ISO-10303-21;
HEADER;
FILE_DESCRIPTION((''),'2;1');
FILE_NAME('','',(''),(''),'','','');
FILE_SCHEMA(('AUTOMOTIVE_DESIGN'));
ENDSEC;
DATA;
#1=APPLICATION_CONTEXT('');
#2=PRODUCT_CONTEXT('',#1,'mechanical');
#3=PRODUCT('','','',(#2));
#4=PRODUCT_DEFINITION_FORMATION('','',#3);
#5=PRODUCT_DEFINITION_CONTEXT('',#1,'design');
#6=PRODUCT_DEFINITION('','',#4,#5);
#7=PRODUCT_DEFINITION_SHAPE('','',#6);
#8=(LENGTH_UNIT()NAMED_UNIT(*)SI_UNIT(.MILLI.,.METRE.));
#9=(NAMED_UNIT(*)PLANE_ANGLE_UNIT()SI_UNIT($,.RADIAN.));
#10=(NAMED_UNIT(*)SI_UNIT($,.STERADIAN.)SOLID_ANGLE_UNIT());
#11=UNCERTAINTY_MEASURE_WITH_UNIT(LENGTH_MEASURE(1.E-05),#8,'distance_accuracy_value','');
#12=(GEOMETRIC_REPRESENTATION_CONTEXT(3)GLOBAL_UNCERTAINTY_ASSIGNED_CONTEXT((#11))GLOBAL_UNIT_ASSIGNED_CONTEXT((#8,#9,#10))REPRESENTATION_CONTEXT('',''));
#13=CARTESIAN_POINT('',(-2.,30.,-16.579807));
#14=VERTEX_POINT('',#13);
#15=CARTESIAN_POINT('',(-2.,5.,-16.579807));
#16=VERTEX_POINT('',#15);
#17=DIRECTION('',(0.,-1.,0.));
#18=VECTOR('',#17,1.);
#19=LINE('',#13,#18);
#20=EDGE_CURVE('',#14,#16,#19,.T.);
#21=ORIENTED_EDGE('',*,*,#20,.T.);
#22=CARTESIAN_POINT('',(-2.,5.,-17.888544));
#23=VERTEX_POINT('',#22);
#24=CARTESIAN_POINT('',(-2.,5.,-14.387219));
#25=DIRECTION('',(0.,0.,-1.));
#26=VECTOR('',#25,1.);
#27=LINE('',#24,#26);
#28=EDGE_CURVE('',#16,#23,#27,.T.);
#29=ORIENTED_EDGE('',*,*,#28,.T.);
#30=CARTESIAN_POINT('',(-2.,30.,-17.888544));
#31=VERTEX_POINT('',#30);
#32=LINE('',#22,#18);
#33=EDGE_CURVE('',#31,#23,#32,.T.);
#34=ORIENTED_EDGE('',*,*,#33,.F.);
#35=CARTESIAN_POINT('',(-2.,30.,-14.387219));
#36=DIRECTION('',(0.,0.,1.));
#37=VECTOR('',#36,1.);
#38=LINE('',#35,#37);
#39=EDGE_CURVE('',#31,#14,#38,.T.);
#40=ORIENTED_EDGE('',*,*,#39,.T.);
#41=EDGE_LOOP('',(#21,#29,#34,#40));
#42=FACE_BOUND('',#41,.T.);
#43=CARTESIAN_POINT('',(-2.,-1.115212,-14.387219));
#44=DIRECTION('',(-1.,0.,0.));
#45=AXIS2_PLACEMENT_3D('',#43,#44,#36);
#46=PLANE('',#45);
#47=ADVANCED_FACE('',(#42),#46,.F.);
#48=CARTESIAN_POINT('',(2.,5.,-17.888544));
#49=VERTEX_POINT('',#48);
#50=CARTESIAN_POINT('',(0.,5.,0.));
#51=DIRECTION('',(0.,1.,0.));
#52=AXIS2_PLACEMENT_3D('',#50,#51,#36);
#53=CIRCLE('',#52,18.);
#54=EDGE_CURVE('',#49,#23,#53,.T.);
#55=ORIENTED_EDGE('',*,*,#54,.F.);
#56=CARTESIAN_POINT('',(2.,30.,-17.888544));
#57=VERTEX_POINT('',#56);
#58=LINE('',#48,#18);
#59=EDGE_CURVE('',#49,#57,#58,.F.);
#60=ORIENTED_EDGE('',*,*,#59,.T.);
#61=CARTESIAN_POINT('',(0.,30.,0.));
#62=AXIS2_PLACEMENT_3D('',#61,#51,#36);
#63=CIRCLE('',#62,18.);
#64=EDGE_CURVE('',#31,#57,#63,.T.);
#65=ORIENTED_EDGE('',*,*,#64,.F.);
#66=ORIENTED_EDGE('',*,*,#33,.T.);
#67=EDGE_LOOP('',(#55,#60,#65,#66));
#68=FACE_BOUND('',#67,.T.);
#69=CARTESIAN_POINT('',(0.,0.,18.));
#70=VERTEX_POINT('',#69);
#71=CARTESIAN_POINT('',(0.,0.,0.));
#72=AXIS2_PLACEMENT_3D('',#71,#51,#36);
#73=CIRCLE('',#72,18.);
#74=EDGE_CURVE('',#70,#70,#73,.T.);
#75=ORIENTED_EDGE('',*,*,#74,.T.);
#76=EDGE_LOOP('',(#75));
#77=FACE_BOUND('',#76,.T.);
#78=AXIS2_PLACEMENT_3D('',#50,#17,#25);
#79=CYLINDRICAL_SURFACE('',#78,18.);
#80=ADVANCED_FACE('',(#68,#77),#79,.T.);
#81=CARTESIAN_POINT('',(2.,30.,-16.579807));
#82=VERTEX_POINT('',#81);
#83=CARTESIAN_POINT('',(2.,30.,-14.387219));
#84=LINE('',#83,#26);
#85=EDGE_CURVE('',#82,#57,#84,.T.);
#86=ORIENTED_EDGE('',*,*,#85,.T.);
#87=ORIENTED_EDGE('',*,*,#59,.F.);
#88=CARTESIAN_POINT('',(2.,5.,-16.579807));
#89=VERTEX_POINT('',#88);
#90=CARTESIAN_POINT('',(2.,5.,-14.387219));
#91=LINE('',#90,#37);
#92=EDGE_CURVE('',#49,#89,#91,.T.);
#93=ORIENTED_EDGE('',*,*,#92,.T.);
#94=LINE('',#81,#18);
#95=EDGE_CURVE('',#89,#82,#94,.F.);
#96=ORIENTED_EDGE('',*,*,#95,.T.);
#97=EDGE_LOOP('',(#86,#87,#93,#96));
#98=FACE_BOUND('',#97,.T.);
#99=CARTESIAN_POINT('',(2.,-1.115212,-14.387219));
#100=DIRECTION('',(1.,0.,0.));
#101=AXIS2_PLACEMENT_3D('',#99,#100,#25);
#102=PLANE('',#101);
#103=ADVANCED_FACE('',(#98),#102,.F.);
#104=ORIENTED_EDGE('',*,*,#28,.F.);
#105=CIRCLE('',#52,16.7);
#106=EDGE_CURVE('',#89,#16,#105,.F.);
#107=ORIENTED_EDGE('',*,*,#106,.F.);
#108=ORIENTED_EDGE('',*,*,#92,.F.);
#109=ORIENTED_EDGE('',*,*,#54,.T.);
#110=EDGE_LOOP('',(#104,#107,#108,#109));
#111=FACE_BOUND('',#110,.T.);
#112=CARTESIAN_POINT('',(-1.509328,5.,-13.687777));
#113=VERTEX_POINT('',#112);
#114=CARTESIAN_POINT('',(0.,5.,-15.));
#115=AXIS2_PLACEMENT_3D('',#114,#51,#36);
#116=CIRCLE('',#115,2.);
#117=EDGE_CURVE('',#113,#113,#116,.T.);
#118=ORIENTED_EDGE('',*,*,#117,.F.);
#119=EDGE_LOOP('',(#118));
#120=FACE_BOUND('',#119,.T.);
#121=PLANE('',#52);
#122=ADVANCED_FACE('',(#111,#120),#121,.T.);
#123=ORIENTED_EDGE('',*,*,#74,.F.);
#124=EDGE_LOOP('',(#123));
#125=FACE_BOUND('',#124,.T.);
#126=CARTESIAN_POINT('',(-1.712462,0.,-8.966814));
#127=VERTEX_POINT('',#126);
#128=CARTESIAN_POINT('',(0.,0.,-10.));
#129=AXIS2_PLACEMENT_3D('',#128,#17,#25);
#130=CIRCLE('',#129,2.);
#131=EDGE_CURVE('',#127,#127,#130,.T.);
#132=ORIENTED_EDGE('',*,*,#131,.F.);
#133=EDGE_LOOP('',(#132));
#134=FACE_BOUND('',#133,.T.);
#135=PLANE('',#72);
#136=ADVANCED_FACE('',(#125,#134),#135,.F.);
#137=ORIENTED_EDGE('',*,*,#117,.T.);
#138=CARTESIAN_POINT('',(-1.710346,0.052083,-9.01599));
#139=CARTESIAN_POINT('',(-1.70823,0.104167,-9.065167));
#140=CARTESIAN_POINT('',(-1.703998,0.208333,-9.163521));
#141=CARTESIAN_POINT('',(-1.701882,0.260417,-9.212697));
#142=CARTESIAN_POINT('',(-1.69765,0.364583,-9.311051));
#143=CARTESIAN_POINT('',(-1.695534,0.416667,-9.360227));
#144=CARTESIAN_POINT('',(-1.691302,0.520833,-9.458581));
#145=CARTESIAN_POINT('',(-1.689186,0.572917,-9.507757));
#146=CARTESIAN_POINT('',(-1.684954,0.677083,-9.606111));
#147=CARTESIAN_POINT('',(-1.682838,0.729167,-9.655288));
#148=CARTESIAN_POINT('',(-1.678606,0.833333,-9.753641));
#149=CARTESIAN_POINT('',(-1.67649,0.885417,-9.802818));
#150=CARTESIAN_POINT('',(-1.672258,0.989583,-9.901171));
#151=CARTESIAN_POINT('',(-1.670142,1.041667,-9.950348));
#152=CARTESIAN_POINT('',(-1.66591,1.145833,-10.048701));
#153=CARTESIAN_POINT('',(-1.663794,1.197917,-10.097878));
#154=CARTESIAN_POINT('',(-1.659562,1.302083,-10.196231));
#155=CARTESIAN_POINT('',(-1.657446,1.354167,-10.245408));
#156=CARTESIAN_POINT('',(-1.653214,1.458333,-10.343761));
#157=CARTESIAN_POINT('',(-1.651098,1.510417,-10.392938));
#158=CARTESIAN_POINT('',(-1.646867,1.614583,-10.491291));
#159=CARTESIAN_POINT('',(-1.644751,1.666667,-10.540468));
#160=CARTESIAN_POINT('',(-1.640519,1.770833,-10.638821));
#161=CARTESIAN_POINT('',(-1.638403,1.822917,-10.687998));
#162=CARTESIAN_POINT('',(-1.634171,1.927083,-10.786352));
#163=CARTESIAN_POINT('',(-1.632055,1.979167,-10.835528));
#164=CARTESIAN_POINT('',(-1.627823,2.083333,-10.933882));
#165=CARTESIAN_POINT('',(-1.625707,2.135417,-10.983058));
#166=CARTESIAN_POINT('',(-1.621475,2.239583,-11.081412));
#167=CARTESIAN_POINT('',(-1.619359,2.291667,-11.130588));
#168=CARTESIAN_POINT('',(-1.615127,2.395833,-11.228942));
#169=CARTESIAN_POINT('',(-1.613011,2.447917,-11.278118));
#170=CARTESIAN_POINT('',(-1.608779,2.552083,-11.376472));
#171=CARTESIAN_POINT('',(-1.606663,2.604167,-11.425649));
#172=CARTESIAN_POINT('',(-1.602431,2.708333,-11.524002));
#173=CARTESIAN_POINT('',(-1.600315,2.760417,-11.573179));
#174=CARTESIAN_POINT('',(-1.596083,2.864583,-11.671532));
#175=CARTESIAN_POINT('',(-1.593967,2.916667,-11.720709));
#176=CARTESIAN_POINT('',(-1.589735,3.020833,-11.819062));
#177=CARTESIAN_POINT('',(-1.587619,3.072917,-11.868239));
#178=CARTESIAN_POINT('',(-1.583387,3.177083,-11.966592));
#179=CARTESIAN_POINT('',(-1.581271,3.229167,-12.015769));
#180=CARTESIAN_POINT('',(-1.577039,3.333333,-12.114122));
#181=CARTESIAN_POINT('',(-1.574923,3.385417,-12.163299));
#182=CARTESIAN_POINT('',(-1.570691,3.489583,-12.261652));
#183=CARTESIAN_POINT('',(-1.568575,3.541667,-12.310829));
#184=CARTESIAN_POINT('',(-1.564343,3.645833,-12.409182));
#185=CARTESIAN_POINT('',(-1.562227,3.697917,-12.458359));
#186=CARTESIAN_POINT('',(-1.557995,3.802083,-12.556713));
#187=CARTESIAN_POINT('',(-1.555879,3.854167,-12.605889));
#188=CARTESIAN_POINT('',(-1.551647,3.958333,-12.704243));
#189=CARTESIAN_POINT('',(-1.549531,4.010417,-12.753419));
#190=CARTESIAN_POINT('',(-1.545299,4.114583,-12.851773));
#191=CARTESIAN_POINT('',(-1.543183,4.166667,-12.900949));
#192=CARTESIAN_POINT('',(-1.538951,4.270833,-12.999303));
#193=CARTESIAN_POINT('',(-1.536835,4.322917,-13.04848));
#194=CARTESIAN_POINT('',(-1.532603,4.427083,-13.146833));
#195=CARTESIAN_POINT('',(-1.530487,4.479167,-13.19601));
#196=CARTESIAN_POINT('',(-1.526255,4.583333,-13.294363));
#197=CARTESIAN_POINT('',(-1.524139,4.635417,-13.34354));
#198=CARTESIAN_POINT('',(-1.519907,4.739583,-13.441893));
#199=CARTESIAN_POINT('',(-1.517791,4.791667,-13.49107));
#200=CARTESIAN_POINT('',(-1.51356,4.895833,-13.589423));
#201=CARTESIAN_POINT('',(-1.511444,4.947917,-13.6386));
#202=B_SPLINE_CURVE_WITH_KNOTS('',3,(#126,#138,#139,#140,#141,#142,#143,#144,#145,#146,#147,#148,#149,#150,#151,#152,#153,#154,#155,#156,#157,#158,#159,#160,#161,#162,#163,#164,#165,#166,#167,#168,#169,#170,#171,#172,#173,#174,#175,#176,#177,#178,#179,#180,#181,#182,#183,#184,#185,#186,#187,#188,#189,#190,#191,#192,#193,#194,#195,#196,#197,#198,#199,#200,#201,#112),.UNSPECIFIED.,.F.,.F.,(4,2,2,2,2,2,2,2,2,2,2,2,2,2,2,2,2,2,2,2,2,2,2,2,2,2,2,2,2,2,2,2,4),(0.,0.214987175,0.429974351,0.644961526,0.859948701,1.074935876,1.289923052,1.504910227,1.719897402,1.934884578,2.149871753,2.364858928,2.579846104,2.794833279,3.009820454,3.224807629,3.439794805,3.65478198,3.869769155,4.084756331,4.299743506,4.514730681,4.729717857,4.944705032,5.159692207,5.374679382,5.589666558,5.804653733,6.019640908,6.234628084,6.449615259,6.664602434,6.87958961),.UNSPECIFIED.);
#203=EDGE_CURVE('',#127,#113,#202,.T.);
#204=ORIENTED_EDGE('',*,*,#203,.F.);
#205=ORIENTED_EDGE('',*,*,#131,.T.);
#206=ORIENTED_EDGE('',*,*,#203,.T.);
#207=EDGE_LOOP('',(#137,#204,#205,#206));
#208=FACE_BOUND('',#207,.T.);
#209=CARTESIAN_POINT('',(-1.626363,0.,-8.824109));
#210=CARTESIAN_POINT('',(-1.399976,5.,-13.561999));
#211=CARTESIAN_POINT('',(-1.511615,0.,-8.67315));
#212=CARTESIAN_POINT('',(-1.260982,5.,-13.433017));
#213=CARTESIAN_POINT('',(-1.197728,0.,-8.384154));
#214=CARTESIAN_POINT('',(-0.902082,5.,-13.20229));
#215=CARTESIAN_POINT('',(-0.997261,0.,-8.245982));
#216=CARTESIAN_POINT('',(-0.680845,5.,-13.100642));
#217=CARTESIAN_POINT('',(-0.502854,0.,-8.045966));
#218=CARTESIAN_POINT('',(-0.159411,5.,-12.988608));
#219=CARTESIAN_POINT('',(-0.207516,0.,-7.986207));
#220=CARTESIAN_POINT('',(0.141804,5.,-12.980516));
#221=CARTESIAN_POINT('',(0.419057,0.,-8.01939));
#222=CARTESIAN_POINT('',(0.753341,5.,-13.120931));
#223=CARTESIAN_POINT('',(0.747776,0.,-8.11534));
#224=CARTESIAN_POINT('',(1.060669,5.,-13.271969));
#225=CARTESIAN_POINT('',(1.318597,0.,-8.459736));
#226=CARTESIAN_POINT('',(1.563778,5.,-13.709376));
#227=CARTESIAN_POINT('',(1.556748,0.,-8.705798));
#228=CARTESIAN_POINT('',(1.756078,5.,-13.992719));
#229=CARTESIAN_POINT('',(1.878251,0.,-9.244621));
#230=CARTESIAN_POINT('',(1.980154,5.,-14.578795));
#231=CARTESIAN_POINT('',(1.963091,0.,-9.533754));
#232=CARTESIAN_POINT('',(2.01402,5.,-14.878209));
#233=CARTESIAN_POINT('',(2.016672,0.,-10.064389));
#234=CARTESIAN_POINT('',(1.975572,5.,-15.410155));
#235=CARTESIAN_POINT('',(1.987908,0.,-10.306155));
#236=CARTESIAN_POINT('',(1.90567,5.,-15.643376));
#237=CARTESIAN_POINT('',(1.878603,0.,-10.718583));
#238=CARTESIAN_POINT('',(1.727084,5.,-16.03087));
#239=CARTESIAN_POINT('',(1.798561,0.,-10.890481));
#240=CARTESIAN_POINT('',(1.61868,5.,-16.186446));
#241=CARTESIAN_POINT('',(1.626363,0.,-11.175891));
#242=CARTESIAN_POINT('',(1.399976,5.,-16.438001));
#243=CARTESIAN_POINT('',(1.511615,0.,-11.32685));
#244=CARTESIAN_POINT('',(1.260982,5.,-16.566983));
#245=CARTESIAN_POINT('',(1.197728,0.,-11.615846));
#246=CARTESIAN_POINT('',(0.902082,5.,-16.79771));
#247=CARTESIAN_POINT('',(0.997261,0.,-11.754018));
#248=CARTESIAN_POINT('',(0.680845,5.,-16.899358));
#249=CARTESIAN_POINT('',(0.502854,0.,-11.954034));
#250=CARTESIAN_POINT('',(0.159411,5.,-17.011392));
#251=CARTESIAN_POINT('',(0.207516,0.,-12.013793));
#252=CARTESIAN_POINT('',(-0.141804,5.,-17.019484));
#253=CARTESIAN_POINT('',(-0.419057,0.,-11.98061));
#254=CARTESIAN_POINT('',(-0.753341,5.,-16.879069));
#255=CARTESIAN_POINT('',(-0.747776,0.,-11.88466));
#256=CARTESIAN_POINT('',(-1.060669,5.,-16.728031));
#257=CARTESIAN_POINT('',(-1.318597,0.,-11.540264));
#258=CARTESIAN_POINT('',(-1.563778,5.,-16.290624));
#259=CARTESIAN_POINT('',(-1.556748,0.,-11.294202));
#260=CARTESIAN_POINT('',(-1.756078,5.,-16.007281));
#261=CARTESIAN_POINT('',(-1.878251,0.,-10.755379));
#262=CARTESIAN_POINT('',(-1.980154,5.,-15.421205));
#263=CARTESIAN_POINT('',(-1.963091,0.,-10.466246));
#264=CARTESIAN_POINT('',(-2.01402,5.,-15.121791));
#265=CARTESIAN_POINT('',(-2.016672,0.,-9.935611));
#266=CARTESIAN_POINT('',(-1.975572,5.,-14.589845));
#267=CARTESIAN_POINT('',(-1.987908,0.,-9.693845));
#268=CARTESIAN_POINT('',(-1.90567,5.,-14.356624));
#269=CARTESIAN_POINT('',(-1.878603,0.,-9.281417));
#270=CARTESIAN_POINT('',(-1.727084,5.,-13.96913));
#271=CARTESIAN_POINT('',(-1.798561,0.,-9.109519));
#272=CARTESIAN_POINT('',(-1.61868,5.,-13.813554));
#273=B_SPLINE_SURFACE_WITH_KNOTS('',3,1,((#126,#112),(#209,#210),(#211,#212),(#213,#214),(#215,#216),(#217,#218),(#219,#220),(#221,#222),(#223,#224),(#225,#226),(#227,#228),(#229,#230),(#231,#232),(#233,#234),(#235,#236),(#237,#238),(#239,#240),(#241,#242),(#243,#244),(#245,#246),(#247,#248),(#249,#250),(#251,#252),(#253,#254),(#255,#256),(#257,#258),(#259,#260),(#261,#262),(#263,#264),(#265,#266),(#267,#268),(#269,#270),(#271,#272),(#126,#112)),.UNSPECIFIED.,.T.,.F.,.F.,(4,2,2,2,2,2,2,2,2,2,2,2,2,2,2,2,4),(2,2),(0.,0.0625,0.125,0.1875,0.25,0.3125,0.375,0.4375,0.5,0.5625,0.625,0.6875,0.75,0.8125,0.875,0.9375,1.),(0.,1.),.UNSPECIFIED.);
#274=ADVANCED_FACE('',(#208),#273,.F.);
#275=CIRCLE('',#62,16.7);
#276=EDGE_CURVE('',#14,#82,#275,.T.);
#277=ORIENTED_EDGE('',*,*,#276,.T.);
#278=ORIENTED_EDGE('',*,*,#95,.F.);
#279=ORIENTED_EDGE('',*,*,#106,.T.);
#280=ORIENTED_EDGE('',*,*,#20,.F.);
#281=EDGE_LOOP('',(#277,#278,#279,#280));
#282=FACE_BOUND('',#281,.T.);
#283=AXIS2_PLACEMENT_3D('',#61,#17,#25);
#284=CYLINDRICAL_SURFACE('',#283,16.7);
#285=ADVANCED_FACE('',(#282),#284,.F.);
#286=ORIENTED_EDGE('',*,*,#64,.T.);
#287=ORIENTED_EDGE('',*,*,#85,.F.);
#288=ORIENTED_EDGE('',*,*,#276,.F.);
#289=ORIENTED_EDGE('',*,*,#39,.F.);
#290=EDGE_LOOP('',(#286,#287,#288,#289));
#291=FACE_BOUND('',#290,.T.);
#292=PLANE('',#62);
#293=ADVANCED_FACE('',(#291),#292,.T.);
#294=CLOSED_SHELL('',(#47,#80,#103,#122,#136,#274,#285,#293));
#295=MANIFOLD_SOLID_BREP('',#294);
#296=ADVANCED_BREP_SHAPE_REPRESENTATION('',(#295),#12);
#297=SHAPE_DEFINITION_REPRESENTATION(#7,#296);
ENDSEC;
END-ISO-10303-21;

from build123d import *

# Parameters (mm, degrees)
SKETCH1_R           = 18
BOSS_EXTRUDE1_DEPTH = 5
SKETCH2_R           = 18
SKETCH2_R_2         = 16.7
BOSS_EXTRUDE2_DEPTH = 25
SKETCH3_W           = 4
SKETCH3_H           = 4.625561496
CUT_EXTRUDE1_DEPTH  = 25


with BuildPart() as part:
    # Sketch1 → Boss-Extrude1 (new body)
    with BuildSketch(Plane(origin=(0, 0, 0), x_dir=(1, 0, 0), z_dir=(0, 1, 0))):
        with Locations(Location((0, 0, 0), (0, 0, 270))):
            Circle(SKETCH1_R)
    extrude(amount=BOSS_EXTRUDE1_DEPTH)

    # Sketch2 → Boss-Extrude2 (add)
    with BuildSketch(Plane(origin=(0, 5, 0), x_dir=(1, 0, 0), z_dir=(0, 1, 0))):
        with Locations(Location((0, 0, 0), (0, 0, 270))):
            Circle(SKETCH2_R)
        with Locations(Location((0, 0, 0), (0, 0, 270))):
            Circle(SKETCH2_R_2, mode=Mode.SUBTRACT)
    extrude(amount=BOSS_EXTRUDE2_DEPTH)

    # Sketch3 → Cut-Extrude1 (cut)
    with BuildSketch(Plane(origin=(0, 30, 0), x_dir=(1, 0, 0), z_dir=(0, 1, 0))):
        with Locations((0, 16.7)):
            Rectangle(SKETCH3_W, SKETCH3_H)
    extrude(amount=-CUT_EXTRUDE1_DEPTH, mode=Mode.SUBTRACT)

    # Cut-Loft1: read off the stored shape, not the designer's step
    # Cut-Loft1: loft between two sections, ruled curve by curve
    cut_loft1_from = [
        Edge.make_bspline([(-1.712462043, 0, -8.966813787), (-1.626363192, 0, -8.824108617), (-1.511615223, 0, -8.673150149), (-1.197727621, 0, -8.384153579), (-0.9972614, 0, -8.245981525), (-0.502854414, 0, -8.045966083), (-0.20751606, 0, -7.986207367), (0.419056865, 0, -8.019390239), (0.747775872, 0, -8.115340255), (1.318596553, 0, -8.459735659), (1.556747911, 0, -8.705797688), (1.878250858, 0, -9.244621024), (1.963090928, 0, -9.533754229), (2.016671796, 0, -10.064389259), (1.987908436, 0, -10.306155451), (1.878602966, 0, -10.718583333), (1.798560894, 0, -10.890481042), (1.626363192, 0, -11.175891383), (1.511615223, 0, -11.326849851), (1.197727621, 0, -11.615846421), (0.9972614, 0, -11.754018475), (0.502854414, 0, -11.954033917), (0.20751606, 0, -12.013792633), (-0.419056865, 0, -11.980609761), (-0.747775872, 0, -11.884659745), (-1.318596553, 0, -11.540264341), (-1.556747911, 0, -11.294202312), (-1.878250858, 0, -10.755378976), (-1.963090928, 0, -10.466245771), (-2.016671796, 0, -9.935610741), (-1.987908436, 0, -9.693844549), (-1.878602966, 0, -9.281416667), (-1.798560894, 0, -9.109518958), (-1.712462043, 0, -8.966813787)], [0, 0, 0, 0, 0.0625, 0.0625, 0.125, 0.125, 0.1875, 0.1875, 0.25, 0.25, 0.3125, 0.3125, 0.375, 0.375, 0.4375, 0.4375, 0.5, 0.5, 0.5625, 0.5625, 0.625, 0.625, 0.6875, 0.6875, 0.75, 0.75, 0.8125, 0.8125, 0.875, 0.875, 0.9375, 0.9375, 1, 1, 1, 1], 3),
    ]
    cut_loft1_to = [
        Edge.make_bspline([(-1.509327554, 5, -13.687776568), (-1.399975601, 5, -13.561999272), (-1.260982153, 5, -13.433017192), (-0.902081628, 5, -13.202290388), (-0.680844687, 5, -13.100641787), (-0.15941128, 5, -12.988607658), (0.14180355, 5, -12.980516047), (0.75334128, 5, -13.120930922), (1.06066884, 5, -13.271968541), (1.563778024, 5, -13.709376352), (1.756077925, 5, -13.9927195), (1.980154065, 5, -14.578795106), (2.014020397, 5, -14.8782094), (1.975571807, 5, -15.410155027), (1.905670109, 5, -15.643375898), (1.727083916, 5, -16.030869661), (1.618679506, 5, -16.186446136), (1.399975601, 5, -16.438000728), (1.260982153, 5, -16.566982808), (0.902081628, 5, -16.797709612), (0.680844687, 5, -16.899358213), (0.15941128, 5, -17.011392342), (-0.14180355, 5, -17.019483953), (-0.75334128, 5, -16.879069078), (-1.06066884, 5, -16.728031459), (-1.563778024, 5, -16.290623648), (-1.756077925, 5, -16.0072805), (-1.980154065, 5, -15.421204894), (-2.014020397, 5, -15.1217906), (-1.975571807, 5, -14.589844973), (-1.905670109, 5, -14.356624102), (-1.727083916, 5, -13.969130339), (-1.618679506, 5, -13.813553864), (-1.509327554, 5, -13.687776568)], [0, 0, 0, 0, 0.0625, 0.0625, 0.125, 0.125, 0.1875, 0.1875, 0.25, 0.25, 0.3125, 0.3125, 0.375, 0.375, 0.4375, 0.4375, 0.5, 0.5, 0.5625, 0.5625, 0.625, 0.625, 0.6875, 0.6875, 0.75, 0.75, 0.8125, 0.8125, 0.875, 0.875, 0.9375, 0.9375, 1, 1, 1, 1], 3),
    ]
    cut_loft1 = Solid(Shell([*[Face.make_surface_from_curves(cut_loft1_from[k], cut_loft1_to[k]) for k in range(1)], Face(Wire(cut_loft1_from)), Face(Wire(cut_loft1_to))]))
    add(cut_loft1, mode=Mode.SUBTRACT)


solid = part.part
